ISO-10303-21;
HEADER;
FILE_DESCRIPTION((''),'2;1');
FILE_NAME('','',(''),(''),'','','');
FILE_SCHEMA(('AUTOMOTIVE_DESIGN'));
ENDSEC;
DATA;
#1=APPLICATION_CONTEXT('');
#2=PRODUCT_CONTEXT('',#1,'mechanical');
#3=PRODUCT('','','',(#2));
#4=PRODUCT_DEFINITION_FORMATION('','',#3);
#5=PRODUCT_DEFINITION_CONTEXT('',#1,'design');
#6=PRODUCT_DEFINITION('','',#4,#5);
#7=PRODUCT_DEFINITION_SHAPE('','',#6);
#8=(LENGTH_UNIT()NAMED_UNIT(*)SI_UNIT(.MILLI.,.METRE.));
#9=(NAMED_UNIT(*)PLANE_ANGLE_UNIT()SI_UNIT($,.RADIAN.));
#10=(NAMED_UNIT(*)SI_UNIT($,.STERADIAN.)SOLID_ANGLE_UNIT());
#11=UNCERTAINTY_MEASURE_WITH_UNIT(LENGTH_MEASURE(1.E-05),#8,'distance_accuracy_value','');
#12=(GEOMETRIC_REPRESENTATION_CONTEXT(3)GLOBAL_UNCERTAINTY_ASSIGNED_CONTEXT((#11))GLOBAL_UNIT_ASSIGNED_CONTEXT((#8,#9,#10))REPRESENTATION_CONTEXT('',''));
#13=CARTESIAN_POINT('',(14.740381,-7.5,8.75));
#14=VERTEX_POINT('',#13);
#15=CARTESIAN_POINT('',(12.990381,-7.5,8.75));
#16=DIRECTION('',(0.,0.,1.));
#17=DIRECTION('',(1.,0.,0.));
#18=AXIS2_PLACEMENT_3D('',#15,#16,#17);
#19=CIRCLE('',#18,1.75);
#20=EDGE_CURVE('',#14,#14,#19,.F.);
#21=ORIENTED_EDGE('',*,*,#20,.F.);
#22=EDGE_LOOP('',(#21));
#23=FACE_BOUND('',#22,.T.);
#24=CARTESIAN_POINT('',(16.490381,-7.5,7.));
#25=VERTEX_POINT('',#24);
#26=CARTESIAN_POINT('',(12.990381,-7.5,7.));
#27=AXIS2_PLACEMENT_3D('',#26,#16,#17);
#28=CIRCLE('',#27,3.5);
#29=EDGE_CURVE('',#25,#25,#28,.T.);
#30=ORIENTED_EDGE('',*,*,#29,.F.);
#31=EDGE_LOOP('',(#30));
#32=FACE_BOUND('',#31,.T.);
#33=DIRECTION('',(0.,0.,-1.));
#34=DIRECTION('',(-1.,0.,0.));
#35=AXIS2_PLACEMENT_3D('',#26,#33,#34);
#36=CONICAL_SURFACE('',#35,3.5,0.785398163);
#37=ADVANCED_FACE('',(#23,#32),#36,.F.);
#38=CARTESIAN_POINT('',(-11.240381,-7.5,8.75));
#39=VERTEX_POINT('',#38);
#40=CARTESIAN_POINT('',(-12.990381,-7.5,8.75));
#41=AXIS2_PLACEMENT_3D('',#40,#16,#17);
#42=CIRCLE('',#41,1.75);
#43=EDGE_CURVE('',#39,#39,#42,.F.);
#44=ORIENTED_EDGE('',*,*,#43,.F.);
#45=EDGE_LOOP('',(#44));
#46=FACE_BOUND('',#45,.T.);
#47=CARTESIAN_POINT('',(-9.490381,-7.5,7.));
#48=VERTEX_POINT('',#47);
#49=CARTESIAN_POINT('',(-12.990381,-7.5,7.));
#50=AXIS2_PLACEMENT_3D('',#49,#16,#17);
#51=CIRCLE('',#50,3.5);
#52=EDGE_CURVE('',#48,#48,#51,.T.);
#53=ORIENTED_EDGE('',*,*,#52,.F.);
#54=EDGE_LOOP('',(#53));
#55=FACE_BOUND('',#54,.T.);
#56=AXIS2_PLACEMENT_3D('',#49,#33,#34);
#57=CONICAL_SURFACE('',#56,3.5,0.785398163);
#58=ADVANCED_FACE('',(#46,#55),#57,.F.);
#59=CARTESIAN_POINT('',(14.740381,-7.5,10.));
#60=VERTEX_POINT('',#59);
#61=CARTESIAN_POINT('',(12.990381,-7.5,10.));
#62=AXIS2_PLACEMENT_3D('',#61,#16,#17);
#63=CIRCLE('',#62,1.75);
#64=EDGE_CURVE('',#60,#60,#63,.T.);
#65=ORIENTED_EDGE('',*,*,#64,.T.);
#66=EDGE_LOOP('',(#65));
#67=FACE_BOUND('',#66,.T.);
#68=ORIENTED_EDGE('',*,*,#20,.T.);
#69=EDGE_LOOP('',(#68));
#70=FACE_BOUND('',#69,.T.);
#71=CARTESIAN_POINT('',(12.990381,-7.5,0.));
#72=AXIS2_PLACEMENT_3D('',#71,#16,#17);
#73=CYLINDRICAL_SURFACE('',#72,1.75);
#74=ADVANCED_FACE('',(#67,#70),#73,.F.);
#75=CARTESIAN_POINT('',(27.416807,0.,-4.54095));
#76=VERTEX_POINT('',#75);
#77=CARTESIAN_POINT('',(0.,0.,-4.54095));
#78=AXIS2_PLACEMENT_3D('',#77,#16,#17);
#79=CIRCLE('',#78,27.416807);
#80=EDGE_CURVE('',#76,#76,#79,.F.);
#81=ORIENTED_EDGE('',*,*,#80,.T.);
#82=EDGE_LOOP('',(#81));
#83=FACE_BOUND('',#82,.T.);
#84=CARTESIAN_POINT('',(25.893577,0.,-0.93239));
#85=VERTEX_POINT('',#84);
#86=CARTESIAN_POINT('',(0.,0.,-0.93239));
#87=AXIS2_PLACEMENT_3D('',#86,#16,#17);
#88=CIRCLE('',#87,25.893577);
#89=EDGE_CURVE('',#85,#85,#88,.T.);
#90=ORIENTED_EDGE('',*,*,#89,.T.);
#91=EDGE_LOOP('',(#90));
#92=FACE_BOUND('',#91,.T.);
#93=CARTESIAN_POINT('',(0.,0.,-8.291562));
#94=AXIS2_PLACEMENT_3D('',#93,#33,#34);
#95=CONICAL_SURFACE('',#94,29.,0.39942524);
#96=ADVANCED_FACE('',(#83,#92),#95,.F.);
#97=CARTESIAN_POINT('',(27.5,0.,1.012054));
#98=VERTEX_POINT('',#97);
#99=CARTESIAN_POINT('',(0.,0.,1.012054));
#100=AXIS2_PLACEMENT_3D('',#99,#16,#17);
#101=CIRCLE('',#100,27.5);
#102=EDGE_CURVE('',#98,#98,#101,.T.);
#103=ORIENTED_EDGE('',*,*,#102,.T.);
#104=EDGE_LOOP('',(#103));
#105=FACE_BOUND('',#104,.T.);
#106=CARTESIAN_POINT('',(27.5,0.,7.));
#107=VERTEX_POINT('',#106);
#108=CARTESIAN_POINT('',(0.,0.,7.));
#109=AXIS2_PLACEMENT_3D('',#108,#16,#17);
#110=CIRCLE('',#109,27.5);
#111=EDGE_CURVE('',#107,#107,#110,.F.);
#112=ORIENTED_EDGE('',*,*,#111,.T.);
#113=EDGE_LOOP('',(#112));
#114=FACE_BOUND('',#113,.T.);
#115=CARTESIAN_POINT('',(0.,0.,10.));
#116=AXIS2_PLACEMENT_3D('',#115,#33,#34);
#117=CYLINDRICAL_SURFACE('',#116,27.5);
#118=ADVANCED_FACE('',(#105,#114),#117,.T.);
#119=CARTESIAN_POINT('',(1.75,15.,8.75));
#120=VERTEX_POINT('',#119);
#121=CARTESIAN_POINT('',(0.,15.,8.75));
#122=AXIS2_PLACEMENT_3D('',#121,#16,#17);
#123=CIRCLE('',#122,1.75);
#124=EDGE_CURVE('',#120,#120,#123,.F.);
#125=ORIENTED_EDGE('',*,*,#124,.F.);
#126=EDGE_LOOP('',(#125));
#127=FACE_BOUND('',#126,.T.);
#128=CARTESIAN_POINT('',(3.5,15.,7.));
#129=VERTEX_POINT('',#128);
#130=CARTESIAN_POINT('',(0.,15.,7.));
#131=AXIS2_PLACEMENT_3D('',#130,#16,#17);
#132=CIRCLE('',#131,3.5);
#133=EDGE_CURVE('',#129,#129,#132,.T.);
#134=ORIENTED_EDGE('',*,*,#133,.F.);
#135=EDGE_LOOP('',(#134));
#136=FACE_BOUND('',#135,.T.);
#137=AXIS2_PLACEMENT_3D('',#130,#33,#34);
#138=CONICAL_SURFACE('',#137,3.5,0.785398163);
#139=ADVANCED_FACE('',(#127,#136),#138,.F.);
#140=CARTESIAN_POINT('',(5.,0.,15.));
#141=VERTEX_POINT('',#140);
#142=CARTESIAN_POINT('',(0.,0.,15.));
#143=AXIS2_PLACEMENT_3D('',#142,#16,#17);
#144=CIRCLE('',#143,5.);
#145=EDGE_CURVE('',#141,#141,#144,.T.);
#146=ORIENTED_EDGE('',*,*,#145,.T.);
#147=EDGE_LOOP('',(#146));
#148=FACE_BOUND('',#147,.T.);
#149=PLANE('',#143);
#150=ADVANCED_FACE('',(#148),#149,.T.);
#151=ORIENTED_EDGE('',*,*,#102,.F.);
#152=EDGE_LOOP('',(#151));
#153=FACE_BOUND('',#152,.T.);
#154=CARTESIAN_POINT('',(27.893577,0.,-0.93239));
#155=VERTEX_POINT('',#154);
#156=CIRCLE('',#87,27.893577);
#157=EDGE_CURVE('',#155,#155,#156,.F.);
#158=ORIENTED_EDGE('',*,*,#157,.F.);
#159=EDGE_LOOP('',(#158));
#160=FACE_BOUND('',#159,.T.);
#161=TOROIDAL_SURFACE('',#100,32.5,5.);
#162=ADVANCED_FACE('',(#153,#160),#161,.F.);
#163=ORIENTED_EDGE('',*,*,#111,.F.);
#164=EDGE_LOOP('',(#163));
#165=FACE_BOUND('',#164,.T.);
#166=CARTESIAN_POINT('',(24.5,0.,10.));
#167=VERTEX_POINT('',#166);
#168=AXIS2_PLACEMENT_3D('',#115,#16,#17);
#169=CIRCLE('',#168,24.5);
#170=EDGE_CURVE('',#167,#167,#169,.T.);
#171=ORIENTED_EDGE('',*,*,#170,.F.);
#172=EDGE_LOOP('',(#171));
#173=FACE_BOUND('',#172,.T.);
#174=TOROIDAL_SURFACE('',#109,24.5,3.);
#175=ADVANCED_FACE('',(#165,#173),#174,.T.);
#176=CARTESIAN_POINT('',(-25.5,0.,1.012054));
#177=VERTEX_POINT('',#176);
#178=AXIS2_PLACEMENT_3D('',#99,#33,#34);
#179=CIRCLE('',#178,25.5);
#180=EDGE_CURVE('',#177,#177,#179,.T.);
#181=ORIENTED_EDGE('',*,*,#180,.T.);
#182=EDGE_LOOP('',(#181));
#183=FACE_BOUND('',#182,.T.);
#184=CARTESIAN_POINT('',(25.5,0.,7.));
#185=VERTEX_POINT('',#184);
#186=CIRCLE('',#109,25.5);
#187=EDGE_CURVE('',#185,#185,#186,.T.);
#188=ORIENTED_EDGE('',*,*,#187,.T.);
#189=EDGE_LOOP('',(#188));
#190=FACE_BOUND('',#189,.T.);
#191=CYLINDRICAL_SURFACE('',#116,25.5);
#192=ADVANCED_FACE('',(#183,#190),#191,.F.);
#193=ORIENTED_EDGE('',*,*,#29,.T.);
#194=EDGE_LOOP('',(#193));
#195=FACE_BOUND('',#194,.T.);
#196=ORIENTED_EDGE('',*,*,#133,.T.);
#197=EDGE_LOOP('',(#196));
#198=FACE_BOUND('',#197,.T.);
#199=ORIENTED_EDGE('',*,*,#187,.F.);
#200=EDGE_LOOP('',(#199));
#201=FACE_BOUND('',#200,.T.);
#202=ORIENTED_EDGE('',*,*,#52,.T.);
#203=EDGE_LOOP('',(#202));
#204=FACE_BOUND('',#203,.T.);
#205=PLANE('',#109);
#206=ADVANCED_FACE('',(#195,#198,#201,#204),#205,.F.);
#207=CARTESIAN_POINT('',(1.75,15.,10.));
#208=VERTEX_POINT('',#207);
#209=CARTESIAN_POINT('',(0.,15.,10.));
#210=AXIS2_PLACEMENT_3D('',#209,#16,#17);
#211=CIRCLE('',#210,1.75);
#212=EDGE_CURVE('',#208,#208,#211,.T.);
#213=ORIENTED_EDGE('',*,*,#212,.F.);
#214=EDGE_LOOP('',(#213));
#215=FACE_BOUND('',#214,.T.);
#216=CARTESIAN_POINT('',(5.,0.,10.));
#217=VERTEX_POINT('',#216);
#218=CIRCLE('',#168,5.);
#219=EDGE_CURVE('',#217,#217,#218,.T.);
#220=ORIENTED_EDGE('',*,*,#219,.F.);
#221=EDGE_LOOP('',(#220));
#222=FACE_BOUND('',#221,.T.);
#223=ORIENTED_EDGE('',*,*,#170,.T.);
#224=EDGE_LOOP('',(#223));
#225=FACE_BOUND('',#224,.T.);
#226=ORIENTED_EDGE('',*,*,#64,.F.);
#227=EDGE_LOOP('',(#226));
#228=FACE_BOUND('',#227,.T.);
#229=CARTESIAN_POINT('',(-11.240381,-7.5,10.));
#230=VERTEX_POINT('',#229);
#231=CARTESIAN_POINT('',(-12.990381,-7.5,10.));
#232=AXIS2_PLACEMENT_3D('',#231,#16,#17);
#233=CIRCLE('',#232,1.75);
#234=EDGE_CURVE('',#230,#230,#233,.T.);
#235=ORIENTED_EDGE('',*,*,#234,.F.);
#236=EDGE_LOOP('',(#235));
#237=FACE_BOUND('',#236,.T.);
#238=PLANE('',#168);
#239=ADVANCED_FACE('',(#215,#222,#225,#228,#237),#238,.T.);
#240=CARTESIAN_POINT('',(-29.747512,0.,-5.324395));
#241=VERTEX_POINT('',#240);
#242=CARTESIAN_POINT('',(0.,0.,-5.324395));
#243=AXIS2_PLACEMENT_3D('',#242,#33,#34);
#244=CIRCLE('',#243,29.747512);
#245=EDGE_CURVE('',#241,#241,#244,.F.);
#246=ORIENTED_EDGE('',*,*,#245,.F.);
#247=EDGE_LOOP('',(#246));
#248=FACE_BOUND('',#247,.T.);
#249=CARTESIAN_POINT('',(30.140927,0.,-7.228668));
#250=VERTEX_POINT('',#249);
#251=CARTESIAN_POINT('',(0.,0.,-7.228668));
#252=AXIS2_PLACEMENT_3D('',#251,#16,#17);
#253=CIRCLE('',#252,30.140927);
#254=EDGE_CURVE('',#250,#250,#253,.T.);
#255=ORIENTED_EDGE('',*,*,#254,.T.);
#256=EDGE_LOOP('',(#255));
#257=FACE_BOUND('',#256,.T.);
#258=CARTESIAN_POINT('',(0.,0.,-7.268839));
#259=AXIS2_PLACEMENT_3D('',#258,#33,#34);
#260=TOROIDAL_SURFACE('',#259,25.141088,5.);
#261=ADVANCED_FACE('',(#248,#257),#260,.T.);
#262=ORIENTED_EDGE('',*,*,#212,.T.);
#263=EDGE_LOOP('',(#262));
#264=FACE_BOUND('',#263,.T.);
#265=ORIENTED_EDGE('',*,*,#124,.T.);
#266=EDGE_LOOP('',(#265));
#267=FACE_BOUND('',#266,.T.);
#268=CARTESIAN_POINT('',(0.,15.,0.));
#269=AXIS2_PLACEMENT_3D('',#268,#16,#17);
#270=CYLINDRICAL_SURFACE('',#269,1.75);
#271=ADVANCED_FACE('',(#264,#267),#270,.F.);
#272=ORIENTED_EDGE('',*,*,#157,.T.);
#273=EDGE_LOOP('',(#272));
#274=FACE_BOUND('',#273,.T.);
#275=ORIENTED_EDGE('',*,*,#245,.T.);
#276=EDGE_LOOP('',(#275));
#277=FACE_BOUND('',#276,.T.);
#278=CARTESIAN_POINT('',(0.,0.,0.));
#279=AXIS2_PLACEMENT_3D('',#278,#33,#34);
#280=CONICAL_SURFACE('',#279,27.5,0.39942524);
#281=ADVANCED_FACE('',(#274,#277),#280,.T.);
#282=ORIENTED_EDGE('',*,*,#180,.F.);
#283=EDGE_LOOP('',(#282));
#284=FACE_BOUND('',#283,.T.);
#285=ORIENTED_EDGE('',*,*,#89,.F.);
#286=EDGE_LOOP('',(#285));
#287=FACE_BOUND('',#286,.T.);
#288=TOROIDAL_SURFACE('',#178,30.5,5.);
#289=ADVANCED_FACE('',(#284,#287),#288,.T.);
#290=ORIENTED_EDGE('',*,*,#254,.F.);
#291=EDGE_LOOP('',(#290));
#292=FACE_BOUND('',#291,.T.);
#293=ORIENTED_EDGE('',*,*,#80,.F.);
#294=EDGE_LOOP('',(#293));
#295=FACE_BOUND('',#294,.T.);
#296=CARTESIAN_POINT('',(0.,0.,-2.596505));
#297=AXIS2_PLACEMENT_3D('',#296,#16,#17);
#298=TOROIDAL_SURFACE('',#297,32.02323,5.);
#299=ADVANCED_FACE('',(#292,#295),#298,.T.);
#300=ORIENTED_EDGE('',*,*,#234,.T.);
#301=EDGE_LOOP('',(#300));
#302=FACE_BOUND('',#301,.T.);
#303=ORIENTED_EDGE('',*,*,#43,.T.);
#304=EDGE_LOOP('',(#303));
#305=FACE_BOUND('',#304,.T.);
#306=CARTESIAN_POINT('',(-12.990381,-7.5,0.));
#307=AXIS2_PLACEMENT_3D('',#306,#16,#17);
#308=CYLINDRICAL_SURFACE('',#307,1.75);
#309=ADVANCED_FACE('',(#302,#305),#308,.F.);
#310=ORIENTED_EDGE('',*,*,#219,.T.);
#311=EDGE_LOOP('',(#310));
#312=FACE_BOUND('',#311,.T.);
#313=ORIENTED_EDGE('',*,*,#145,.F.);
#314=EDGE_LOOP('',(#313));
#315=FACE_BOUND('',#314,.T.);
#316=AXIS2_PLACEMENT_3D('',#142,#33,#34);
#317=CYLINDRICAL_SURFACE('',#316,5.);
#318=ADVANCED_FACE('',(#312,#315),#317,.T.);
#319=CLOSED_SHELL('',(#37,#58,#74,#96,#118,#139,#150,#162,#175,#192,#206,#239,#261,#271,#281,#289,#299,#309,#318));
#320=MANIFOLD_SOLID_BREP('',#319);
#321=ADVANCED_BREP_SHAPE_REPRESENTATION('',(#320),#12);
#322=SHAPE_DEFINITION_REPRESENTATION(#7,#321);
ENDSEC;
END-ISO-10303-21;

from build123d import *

# Parameters (mm, degrees)
SKETCH_1_R          = 27.5
SKETCH_1_R_2        = 25.5
EXTRUDE_1_DEPTH     = 10
EXTRUDE_START       = -3
SKETCH_2_R          = 27.5
EXTRUDE_2_DEPTH     = 3
FILLET_1_R          = 3
SKETCH_3_R          = 5
EXTRUDE_3_DEPTH     = 5
SKETCH_4_R          = 1.75
CUT_EXTRUDE_1_DEPTH = 10
CHAMFER_1_SIZE      = 1.75
FILLET_2_R          = 5
CHAMFER_2_SIZE      = 2
CHAMFER_2_SIZE_2    = 3.756603815
FILLET_3_R          = 5


with BuildPart() as part:
    # 草图1 → 凸台-拉伸1 (new body)
    with BuildSketch(Plane.XY):
        Circle(SKETCH_1_R)
        Circle(SKETCH_1_R_2, mode=Mode.SUBTRACT)
    extrude(amount=EXTRUDE_1_DEPTH)

    # 草图2 → 凸台-拉伸2 (add)
    with BuildSketch(Plane.XY.offset(10).offset(EXTRUDE_START)):
        Circle(SKETCH_2_R)
    extrude(amount=EXTRUDE_2_DEPTH)

    # 圆角1
    fillet_1_edges = [part.edges().sort_by_distance(p)[0] for p in [
        (-27.5, 0, 10),
    ]]
    fillet(fillet_1_edges, radius=FILLET_1_R)

    # 草图3 → 凸台-拉伸3 (add)
    with BuildSketch(Plane.XY.offset(10)):
        Circle(SKETCH_3_R)
    extrude(amount=EXTRUDE_3_DEPTH)

    # 草图4 → 切除-拉伸1 (cut)
    with BuildSketch(Plane.XY.offset(10)):
        with Locations((0, 15)):
            Circle(SKETCH_4_R)
        with Locations((12.990381057, -7.5)):
            Circle(SKETCH_4_R)
        with Locations((-12.990381057, -7.5)):
            Circle(SKETCH_4_R)
    extrude(amount=-CUT_EXTRUDE_1_DEPTH, mode=Mode.SUBTRACT)

    # 倒角1
    chamfer_1_edges = [part.edges().sort_by_distance(p)[0] for p in [
        (-1.75, 15, 7),
        (11.240381057, -7.5, 7),
        (-14.740381057, -7.5, 7),
    ]]
    chamfer(chamfer_1_edges, length=CHAMFER_1_SIZE)

    # 草图5 → 旋转1 (revolve)
    with BuildSketch(Plane(origin=(0, 0, 0), x_dir=(1, 0, 0), z_dir=(0, 1, 0))):
        Polygon((27.5, 0), (31, 8.291561976), (29, 8.291561976), (25.5, 0), align=None)
    revolve(axis=Axis((0, 0, 15), (0, 0, -1)))

    # 圆角2
    fillet_2_edges = [part.edges().sort_by_distance(p)[0] for p in [
        (-25.5, 0, 0),
    ]]
    fillet(fillet_2_edges, radius=FILLET_2_R)

    # 倒角2
    # the kernel refuses this chamfer: 3.756603815, 2 mm, written as the material it takes off along each edge
    with BuildSketch(Plane(origin=(0, 0, -8.291561976), x_dir=(1, 0, 0), z_dir=(0, 1, 0))) as chamfer_2_piece_1:
        Polygon((29 - CHAMFER_2_SIZE * 0.388888888889, -CHAMFER_2_SIZE * 0.921284663988), (29 + CHAMFER_2_SIZE_2, 0), (29, 0), align=None)
    revolve(axis=Axis((0, 0, -8.291561976), (0, 0, -1)), mode=Mode.SUBTRACT)

    # 圆角3
    fillet_3_edges = [part.edges().sort_by_distance(p)[0] for p in [
        (-28.222222222, 0, -6.448992648),
    ]]
    fillet(fillet_3_edges, radius=FILLET_3_R)

    # 圆角4: read off the stored shape, not the designer's step
    # 圆角4 outline → 圆角4 (revolve, cut)
    with BuildSketch(Plane.XZ):
        with BuildLine():
            Line((30.636307825, -5.324394926), (29.747511663, -5.324394926))
            ThreePointArc((29.747511663, -5.324394926), (30.037682192, -6.257222508), (30.140926968, -7.228668209))
            Line((30.140926968, -7.228668209), (30.636307825, -7.429968773))
            Line((30.636307825, -7.429968773), (30.636307825, -5.324394926))
        make_face()
    revolve(axis=Axis((0, 0, 0), (0, 0, 1)), mode=Mode.SUBTRACT)

    # Fillet 4 2 outline → Fillet 4 2 (revolve)
    with BuildSketch(Plane.XZ):
        with BuildLine():
            Line((27.5, -0.932390124), (27.89357668, -0.932390124))
            ThreePointArc((27.89357668, -0.932390124), (27.599381845, 0.020115965), (27.5, 1.01205432))
            Line((27.5, 1.01205432), (27.5, -0.932390124))
        make_face()
    revolve(axis=Axis((0, 0, 0), (0, 0, 1)))


solid = part.part
